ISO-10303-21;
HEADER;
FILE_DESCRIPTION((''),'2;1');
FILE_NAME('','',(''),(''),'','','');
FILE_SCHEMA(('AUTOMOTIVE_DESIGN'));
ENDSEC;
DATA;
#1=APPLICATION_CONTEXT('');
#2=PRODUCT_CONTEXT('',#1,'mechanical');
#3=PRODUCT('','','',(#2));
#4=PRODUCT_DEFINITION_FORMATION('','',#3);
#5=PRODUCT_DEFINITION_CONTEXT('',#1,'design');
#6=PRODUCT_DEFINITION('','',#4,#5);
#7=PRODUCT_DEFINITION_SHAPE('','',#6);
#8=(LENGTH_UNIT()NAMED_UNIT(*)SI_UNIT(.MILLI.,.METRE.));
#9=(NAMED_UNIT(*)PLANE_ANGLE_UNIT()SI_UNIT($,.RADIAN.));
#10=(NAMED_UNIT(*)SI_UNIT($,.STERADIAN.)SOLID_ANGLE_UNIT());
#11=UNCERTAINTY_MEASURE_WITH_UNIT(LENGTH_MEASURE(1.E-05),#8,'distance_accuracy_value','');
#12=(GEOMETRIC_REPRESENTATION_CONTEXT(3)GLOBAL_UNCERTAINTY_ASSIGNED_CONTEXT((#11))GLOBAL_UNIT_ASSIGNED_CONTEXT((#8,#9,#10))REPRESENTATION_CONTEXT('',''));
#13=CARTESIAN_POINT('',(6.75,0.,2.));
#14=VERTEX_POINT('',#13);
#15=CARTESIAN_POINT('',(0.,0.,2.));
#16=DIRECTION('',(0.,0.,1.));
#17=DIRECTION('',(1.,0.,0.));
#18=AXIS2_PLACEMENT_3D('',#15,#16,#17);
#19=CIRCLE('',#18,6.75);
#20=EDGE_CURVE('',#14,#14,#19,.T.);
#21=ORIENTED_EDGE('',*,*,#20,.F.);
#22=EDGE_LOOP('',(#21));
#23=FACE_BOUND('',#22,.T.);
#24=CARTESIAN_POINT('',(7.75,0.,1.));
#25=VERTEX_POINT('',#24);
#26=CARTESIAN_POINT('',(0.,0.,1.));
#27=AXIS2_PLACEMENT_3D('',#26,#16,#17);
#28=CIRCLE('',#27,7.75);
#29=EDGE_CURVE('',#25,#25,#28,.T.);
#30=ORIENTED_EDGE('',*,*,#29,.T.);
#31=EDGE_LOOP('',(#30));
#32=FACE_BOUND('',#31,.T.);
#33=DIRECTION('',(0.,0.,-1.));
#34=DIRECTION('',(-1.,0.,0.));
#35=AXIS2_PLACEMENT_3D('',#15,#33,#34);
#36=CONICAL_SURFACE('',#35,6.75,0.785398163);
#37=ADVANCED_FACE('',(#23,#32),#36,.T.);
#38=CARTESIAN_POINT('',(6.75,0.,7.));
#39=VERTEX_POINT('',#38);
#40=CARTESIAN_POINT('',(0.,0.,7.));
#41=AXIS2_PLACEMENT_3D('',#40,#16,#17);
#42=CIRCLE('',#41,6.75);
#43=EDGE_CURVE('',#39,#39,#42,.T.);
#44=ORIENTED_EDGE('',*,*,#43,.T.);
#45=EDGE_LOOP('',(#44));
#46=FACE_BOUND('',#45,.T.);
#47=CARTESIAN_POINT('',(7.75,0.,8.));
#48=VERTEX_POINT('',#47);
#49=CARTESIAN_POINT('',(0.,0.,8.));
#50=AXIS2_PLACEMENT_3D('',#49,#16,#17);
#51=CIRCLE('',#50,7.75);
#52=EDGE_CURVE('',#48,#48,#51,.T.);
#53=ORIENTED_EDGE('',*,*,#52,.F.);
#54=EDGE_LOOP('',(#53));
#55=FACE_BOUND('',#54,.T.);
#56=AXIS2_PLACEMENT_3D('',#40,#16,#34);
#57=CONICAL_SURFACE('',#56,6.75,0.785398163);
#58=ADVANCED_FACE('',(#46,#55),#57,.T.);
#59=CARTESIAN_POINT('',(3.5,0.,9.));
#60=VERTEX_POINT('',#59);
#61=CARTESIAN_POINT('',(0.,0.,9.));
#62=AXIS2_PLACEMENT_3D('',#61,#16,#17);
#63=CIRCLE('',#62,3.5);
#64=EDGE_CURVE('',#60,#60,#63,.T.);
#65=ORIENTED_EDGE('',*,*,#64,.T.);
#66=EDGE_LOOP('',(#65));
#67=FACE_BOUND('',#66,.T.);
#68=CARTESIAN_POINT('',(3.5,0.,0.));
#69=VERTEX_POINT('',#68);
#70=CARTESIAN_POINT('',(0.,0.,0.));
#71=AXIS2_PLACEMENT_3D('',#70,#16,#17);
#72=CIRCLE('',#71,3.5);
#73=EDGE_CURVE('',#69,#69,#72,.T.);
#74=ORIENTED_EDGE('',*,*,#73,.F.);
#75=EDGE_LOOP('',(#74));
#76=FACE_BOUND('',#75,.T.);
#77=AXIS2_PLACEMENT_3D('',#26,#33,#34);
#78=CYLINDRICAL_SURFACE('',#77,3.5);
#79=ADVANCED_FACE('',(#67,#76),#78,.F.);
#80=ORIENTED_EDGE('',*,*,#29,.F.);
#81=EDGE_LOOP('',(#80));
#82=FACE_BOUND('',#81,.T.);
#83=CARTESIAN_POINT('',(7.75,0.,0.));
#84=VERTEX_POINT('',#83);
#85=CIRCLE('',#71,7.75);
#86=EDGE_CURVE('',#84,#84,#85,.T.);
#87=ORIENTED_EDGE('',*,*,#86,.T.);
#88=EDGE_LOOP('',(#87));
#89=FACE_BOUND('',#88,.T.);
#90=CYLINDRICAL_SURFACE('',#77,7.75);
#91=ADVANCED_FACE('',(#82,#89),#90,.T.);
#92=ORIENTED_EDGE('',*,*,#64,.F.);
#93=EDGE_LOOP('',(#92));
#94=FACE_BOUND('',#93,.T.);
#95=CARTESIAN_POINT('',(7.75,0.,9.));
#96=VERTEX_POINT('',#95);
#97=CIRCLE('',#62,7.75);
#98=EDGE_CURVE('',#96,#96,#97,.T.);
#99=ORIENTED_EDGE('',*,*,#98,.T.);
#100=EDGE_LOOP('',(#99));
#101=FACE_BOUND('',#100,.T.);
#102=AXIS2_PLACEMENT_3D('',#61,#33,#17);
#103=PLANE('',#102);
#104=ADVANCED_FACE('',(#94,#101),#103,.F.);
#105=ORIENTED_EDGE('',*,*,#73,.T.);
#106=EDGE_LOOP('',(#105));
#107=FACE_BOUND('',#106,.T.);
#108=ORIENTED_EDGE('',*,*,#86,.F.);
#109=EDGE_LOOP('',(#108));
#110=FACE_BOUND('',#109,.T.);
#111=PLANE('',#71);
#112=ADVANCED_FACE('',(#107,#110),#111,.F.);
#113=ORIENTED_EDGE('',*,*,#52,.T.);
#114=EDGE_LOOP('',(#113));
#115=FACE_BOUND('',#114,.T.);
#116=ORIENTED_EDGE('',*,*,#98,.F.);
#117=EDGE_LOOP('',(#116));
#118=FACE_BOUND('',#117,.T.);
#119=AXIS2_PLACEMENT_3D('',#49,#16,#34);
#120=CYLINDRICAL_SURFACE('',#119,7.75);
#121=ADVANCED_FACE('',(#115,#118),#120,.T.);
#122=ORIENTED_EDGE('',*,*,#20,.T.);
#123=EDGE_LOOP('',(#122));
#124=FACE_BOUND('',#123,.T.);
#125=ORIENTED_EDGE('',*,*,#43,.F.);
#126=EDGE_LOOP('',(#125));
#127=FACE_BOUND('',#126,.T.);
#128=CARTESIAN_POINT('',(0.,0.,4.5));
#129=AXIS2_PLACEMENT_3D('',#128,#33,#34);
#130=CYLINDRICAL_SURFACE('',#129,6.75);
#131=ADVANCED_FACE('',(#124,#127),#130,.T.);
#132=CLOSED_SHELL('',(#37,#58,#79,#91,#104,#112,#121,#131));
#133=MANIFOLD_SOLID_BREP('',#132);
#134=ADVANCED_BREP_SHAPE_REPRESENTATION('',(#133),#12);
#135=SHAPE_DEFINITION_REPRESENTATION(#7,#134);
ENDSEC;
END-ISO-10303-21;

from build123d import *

# Parameters (mm, degrees)
SKETCH1_R           = 7.75
SKETCH1_R_2         = 3.5
BOSS_EXTRUDE1_DEPTH = 1
SKETCH2_R           = 6.75
SKETCH2_R_2         = 3.5
BOSS_EXTRUDE2_DEPTH = 3.5
CHAMFER1_SIZE       = 1


with BuildPart() as part:
    # Sketch1 → Boss-Extrude1 (new body)
    with BuildSketch(Plane.XY):
        Circle(SKETCH1_R)
        Circle(SKETCH1_R_2, mode=Mode.SUBTRACT)
    extrude(amount=BOSS_EXTRUDE1_DEPTH)

    # Sketch2 → Boss-Extrude2 (add)
    with BuildSketch(Plane.XY.offset(1)):
        Circle(SKETCH2_R)
        Circle(SKETCH2_R_2, mode=Mode.SUBTRACT)
    extrude(amount=BOSS_EXTRUDE2_DEPTH)

    # Chamfer1
    chamfer1_edges = [part.edges().sort_by_distance(p)[0] for p in [
        (-6.75, 0, 1),
    ]]
    chamfer(chamfer1_edges, length=CHAMFER1_SIZE - 0.0001)  # a hair under: the kernel refuses the full size

    # Mirror5: part across plane


with BuildPart() as part_1:
    add(part.part)
    add(part.part.mirror(Plane.XY.offset(4.5)))


solid = part_1.part
